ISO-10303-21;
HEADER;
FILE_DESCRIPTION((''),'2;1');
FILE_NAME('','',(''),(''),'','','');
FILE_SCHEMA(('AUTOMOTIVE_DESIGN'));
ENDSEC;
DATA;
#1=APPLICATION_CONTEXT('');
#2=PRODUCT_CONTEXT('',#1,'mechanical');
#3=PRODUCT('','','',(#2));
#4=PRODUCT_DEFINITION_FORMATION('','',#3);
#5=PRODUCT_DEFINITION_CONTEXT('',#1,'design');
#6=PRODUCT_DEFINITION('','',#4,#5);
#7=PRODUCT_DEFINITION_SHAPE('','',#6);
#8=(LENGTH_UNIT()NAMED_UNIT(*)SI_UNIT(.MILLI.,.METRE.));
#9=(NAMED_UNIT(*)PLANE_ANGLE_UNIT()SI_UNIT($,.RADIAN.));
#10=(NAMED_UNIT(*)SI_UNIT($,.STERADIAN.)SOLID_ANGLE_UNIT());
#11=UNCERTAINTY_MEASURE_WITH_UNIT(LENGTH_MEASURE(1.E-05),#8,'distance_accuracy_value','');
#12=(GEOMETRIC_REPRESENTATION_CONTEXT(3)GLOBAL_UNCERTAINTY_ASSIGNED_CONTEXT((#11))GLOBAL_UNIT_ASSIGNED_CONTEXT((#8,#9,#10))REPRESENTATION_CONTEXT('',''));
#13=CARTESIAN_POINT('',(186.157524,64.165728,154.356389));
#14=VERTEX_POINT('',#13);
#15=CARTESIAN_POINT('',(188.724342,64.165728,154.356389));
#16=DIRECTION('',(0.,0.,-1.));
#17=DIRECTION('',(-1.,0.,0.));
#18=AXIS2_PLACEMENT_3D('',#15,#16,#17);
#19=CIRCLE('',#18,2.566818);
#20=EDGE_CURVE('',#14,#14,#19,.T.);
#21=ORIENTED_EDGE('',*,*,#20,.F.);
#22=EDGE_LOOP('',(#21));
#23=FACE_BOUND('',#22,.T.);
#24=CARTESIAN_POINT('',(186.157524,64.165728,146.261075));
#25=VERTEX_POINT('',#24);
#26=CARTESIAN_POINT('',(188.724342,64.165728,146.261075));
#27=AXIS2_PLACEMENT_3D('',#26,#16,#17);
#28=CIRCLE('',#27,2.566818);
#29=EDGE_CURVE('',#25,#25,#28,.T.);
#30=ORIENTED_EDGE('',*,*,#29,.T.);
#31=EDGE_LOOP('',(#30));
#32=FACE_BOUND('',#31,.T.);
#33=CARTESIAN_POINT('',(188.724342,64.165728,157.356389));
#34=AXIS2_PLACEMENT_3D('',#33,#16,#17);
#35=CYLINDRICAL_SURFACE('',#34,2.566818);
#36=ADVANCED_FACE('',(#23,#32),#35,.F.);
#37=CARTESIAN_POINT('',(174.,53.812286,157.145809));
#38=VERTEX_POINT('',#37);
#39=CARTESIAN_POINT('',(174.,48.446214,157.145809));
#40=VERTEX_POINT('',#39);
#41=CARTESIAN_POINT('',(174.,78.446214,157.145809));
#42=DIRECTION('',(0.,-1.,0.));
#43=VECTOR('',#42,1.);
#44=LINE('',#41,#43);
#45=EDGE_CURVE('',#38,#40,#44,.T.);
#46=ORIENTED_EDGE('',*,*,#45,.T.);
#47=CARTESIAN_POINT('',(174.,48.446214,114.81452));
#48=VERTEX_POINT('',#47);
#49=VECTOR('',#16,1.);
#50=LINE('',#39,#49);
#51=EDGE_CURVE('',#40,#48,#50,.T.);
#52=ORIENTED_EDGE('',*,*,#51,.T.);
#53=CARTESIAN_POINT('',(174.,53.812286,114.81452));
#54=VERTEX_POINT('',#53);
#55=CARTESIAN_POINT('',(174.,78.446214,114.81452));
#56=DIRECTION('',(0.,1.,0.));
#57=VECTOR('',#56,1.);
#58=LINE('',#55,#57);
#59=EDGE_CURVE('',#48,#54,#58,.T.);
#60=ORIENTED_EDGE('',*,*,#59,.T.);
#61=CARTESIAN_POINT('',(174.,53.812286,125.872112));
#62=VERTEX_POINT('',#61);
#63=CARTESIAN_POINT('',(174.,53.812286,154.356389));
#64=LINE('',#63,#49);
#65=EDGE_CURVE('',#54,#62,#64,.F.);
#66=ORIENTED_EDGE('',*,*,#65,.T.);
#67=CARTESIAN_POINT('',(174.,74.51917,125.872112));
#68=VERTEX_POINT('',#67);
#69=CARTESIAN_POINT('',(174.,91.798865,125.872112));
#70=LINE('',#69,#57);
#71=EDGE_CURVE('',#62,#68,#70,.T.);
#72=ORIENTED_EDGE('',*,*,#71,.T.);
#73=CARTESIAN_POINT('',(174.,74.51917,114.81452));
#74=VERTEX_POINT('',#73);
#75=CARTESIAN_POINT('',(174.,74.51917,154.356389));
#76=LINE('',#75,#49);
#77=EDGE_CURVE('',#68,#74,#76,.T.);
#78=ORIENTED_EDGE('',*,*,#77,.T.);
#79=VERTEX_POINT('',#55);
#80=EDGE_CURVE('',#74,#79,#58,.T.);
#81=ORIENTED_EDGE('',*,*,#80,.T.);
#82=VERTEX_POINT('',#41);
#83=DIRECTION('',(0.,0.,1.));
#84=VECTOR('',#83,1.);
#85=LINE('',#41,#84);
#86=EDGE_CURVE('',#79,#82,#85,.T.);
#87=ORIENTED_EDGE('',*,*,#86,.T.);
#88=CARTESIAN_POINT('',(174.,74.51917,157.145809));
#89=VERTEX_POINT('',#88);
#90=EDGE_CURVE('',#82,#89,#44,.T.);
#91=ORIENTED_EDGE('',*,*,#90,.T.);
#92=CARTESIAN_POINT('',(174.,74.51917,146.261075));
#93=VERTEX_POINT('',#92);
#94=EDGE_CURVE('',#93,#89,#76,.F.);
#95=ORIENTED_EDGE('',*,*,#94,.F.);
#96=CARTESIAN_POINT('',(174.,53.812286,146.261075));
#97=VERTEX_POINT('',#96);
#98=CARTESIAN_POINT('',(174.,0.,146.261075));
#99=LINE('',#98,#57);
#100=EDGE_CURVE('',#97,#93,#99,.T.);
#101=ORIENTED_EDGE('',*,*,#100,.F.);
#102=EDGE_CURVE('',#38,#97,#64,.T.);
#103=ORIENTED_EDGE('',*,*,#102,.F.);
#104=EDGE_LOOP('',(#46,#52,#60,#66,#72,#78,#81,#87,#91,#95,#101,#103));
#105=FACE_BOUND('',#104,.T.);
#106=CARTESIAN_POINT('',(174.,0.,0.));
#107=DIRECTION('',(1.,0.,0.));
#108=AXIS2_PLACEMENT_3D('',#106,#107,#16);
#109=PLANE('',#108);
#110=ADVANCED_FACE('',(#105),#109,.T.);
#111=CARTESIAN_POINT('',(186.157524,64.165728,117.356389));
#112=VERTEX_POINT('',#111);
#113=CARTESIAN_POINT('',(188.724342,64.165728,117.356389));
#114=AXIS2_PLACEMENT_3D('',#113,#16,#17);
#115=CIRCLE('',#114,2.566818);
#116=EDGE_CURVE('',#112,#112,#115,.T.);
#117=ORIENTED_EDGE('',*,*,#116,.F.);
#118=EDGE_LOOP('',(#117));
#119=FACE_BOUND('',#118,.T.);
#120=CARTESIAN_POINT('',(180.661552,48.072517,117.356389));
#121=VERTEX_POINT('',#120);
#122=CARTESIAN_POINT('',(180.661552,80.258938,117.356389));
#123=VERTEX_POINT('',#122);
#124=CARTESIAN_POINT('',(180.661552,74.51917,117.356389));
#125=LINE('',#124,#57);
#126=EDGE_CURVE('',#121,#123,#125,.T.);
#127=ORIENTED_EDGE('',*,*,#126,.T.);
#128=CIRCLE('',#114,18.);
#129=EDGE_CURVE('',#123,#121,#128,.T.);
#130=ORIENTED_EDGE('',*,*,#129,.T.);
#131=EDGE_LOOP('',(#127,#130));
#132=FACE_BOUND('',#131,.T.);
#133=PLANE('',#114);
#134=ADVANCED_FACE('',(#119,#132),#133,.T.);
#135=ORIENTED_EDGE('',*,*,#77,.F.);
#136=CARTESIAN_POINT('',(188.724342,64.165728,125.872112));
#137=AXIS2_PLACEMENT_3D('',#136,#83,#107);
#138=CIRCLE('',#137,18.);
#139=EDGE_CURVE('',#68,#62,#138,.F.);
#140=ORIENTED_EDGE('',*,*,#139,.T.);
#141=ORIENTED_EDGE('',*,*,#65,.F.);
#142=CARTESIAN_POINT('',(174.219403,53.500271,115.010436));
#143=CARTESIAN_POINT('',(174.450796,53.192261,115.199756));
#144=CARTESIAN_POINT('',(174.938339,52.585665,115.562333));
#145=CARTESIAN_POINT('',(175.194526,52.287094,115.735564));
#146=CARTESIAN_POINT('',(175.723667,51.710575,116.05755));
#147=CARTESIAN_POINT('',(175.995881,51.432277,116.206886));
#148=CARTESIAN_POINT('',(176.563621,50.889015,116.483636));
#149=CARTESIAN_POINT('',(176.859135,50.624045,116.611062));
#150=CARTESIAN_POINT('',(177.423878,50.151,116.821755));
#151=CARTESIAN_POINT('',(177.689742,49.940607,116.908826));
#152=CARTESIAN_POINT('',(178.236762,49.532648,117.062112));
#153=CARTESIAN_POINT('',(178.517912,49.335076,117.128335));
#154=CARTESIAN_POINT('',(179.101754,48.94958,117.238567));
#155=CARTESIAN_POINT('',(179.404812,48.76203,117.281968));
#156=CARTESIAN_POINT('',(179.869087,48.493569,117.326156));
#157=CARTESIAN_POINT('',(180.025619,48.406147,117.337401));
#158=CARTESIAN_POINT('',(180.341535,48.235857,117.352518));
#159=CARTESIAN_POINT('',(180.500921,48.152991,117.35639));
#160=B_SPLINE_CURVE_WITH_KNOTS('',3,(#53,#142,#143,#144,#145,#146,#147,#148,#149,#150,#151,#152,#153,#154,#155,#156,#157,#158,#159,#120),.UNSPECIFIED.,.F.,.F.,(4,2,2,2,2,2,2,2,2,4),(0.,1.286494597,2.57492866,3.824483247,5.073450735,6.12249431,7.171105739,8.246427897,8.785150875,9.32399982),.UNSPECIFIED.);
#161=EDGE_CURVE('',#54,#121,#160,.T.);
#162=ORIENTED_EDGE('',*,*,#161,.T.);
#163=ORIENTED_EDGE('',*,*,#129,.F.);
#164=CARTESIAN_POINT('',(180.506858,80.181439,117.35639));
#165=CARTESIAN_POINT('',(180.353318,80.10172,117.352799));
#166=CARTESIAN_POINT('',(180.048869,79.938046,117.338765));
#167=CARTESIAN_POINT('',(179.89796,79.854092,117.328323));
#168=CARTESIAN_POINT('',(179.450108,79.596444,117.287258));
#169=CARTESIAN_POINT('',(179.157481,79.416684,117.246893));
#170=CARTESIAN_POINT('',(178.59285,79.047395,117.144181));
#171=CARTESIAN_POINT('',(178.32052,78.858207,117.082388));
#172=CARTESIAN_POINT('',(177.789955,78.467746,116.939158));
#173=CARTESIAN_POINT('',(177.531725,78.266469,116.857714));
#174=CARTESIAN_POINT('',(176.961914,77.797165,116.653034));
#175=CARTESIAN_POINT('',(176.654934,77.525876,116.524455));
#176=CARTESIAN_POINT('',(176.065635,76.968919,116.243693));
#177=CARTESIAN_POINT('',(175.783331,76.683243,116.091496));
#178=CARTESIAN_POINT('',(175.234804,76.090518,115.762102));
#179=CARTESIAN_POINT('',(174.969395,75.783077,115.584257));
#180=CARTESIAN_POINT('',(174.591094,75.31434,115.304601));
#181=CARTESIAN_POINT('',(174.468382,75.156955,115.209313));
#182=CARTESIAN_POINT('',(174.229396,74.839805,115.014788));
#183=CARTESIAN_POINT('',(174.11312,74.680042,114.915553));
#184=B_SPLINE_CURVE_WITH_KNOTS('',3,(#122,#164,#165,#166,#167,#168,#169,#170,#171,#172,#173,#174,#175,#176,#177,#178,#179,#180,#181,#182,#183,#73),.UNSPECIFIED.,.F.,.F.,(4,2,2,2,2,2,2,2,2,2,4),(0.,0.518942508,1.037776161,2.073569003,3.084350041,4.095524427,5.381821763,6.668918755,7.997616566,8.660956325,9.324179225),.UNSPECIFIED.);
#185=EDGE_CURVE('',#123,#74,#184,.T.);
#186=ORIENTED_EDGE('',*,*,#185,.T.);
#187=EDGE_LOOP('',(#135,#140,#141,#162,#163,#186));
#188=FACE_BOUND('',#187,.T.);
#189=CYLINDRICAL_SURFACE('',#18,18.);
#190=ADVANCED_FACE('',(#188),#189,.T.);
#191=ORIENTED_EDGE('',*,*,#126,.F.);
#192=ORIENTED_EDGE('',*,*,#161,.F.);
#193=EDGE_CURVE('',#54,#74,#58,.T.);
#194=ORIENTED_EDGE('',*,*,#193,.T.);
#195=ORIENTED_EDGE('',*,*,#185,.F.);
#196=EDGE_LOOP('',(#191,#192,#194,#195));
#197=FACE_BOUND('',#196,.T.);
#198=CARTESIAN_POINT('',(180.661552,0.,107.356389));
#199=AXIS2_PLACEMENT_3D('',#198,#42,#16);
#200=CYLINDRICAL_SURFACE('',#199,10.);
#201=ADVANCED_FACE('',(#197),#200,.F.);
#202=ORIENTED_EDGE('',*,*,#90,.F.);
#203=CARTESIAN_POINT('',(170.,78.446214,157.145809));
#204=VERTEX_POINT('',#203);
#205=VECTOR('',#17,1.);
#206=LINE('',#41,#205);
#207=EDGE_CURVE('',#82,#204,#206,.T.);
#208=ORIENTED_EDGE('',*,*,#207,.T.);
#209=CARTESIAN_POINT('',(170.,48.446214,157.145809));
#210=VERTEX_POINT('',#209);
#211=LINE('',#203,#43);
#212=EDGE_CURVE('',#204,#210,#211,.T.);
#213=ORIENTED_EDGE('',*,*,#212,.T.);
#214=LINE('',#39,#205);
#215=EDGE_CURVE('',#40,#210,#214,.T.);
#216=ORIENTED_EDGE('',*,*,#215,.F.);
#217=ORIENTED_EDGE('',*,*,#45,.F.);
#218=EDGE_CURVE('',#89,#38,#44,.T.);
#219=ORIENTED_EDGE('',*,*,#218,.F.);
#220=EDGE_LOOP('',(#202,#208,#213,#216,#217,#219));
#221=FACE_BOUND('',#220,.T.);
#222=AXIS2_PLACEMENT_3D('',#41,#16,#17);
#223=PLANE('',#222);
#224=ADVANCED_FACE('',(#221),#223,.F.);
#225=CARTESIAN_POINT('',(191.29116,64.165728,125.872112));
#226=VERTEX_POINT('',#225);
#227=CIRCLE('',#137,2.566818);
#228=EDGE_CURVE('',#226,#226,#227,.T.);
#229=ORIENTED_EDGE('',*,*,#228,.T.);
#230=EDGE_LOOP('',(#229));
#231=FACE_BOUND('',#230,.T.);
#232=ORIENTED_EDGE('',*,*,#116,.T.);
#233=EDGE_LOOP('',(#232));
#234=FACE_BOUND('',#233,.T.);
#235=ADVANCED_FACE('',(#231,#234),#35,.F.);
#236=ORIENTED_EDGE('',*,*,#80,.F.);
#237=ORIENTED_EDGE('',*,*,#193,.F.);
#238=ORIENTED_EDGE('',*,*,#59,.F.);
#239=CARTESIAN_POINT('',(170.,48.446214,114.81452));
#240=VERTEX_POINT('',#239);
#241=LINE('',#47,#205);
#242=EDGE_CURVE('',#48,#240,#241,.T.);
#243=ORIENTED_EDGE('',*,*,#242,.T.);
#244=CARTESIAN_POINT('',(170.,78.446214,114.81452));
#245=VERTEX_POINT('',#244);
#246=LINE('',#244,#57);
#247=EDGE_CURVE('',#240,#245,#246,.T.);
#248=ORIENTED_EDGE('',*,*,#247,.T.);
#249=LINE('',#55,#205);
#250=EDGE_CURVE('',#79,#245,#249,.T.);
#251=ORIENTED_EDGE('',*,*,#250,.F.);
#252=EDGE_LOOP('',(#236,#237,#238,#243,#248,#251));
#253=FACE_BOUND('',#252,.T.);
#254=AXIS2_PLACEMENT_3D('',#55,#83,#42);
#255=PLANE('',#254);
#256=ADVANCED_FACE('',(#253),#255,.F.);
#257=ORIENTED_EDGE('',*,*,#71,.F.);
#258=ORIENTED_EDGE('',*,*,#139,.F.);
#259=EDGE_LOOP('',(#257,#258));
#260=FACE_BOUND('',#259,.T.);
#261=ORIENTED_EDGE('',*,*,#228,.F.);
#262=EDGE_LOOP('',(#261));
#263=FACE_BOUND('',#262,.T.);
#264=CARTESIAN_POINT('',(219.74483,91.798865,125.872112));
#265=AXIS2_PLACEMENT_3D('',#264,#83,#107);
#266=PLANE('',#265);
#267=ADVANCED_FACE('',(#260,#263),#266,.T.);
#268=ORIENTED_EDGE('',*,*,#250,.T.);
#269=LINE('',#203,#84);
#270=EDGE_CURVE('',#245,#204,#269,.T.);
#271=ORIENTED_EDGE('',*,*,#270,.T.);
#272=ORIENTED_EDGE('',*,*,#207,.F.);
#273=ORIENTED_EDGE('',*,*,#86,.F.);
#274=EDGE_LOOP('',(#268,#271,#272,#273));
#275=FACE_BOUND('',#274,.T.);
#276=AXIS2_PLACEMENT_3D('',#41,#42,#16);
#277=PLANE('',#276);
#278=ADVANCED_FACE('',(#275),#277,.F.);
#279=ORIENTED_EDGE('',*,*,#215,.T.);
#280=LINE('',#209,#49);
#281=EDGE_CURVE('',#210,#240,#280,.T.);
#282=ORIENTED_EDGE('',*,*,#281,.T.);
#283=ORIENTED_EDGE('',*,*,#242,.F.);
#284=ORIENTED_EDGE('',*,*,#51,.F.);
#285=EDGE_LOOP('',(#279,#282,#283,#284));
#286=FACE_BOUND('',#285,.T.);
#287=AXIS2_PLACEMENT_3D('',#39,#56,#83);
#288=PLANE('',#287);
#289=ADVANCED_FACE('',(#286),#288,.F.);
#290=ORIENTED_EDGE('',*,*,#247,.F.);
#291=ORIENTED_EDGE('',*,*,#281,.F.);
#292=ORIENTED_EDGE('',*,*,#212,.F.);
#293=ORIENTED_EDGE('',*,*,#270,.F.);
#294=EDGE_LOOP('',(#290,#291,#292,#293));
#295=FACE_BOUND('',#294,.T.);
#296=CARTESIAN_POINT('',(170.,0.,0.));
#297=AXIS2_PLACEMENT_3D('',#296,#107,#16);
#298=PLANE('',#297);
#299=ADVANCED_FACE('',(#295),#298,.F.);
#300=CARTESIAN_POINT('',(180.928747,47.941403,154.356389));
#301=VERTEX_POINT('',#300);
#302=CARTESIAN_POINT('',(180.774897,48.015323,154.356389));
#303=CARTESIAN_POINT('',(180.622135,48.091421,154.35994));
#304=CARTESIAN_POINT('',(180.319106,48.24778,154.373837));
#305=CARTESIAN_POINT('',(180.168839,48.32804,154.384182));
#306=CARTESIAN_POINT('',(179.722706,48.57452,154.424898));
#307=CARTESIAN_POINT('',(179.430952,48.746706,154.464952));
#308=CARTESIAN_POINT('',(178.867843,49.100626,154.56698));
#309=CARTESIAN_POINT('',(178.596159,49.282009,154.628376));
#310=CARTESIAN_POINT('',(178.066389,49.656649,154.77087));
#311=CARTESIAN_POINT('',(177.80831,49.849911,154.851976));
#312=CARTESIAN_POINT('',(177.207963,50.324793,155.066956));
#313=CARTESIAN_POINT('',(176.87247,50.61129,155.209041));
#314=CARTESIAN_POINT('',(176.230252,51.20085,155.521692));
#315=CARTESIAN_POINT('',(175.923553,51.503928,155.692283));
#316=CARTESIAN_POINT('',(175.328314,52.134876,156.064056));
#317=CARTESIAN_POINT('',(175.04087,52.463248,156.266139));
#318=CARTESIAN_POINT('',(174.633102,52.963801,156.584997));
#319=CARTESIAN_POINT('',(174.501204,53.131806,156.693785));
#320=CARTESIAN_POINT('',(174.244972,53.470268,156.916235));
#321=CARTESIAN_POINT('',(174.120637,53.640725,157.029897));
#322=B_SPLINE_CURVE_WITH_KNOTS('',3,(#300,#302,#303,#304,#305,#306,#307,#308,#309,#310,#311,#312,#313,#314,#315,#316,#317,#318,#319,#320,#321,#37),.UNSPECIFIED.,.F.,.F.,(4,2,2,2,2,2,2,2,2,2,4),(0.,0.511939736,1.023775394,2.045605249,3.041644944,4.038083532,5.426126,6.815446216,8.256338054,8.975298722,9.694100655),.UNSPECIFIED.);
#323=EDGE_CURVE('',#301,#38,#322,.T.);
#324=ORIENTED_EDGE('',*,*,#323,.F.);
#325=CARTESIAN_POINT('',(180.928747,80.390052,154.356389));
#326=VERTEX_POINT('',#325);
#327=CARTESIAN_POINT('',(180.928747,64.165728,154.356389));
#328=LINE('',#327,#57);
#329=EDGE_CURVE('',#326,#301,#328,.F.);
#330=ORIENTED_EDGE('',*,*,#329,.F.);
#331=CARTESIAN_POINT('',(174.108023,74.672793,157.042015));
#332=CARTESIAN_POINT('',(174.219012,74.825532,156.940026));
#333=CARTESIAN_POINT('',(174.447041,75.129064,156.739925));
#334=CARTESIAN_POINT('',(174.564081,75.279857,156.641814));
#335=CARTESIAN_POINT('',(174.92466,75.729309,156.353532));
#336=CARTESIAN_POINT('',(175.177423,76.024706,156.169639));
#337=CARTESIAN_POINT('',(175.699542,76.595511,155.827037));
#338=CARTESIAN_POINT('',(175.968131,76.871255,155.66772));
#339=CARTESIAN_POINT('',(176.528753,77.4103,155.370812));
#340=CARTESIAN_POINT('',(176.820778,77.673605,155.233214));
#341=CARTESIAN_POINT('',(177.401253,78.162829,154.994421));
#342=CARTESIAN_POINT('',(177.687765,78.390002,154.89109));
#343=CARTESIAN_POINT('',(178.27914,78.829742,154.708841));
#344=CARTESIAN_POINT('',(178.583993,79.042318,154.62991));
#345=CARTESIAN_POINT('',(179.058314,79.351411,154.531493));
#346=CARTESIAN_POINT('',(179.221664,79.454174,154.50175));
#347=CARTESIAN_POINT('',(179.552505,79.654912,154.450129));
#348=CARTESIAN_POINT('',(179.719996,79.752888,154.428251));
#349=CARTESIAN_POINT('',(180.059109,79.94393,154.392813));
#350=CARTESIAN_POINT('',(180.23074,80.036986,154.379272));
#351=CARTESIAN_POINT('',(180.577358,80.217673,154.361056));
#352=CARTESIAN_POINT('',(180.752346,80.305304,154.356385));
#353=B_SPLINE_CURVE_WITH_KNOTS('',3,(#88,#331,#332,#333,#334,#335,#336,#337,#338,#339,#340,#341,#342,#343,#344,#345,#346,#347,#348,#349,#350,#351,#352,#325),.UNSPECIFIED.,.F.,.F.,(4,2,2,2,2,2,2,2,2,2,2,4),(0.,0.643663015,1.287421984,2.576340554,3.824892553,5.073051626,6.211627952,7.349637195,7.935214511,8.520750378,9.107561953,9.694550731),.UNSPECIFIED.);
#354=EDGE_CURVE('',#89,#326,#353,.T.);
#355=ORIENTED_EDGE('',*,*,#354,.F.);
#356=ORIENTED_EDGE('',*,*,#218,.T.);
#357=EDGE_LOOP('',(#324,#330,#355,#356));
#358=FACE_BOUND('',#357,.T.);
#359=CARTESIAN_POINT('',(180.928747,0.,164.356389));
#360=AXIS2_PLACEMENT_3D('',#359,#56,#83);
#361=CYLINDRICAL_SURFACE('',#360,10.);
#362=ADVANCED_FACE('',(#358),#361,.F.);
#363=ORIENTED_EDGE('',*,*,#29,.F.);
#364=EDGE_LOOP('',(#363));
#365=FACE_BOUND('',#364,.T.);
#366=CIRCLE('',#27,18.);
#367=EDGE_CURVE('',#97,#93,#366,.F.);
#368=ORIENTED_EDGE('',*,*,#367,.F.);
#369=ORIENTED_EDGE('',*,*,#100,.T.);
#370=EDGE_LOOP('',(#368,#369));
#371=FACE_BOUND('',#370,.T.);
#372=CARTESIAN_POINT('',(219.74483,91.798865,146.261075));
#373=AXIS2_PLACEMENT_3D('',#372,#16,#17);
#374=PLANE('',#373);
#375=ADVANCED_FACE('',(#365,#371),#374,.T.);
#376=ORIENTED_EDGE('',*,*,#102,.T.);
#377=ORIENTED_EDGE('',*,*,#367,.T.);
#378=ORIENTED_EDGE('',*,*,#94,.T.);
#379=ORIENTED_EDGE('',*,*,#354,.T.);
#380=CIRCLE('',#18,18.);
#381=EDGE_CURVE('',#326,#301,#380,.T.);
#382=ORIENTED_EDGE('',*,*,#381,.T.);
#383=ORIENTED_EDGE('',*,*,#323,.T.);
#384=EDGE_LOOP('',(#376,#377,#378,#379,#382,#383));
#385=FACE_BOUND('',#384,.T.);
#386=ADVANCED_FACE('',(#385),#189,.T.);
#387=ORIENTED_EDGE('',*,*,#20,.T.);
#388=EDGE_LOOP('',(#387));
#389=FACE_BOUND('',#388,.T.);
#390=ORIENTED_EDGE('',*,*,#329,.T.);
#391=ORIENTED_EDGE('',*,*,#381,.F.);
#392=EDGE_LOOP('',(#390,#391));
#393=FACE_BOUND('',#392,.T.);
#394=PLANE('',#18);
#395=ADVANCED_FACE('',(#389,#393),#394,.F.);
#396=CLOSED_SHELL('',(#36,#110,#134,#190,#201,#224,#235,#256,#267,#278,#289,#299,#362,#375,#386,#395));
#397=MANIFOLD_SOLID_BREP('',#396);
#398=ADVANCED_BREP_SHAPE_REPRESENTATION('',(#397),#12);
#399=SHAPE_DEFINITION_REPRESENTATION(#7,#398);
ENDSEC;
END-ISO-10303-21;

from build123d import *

# Parameters (mm, degrees)
BOSS_EXTRUDE1_DEPTH      = 9
BOSS_EXTRUDE1_DEPTH_BACK = 28
SKETCH1_R                = 18
SKETCH2_W                = 50.00806526
SKETCH2_H                = 20.388963247
CUT_EXTRUDE1_DEPTH       = 137
SKETCH6_R                = 2.56681782
CUT_EXTRUDE2_DEPTH       = 40
BOSS_EXTRUDE2_START      = 170
SKETCH7_W                = 42.331288986
SKETCH7_H                = 30
BOSS_EXTRUDE2_DEPTH      = 4
FILLET1_R                = 10


with BuildPart() as part:
    # Sketch1 → Boss-Extrude1 (new, two sides: drawn at the far end of the back side and taken through both)
    with BuildSketch(Plane(origin=(0, 0, 126.356389087), x_dir=(-1, 0, 0), z_dir=(0, 0, -1)).offset(-BOSS_EXTRUDE1_DEPTH_BACK)):
        with Locations((-188.724341924, 64.165727937)):
            Circle(SKETCH1_R)
    extrude(amount=BOSS_EXTRUDE1_DEPTH + BOSS_EXTRUDE1_DEPTH_BACK)

    # Sketch2 → Cut-Extrude1 (cut)
    with BuildSketch(Plane(origin=(-6.948170377, -29.446447031, 0), x_dir=(0.99748757373397, -0.07084165615171512, 3.115559675779194e-15), z_dir=(0.07084165615171512, 0.99748757373397, 0))):
        with Locations((192.53019978, -136.066593827)):
            Rectangle(SKETCH2_W, SKETCH2_H)
    extrude(amount=CUT_EXTRUDE1_DEPTH, mode=Mode.SUBTRACT)


with BuildPart() as cut_extrude1_piece_1:
    # of the separate pieces the step leaves, piece 1, a body of its own (cut_extrude1_pieces)
    add(part.part.solids().sort_by_distance((170.724341924, 64.165727937, 125.872112203))[0])


with BuildPart() as cut_extrude1_piece_2:
    # of the separate pieces the step leaves, piece 2, a body of its own (cut_extrude1_pieces)
    add(part.part.solids().sort_by_distance((170.724341924, 64.165727937, 146.26107545))[0])


with BuildPart() as cut_extrude2_tool:
    # Sketch6 → Cut-Extrude2 (new body)
    with BuildSketch(Plane(origin=(0, 0, 117.356389087), x_dir=(-1, 0, 0), z_dir=(0, 0, -1))):
        with Locations((-188.724341924, 64.165727937)):
            Circle(SKETCH6_R)
    extrude(amount=-CUT_EXTRUDE2_DEPTH)


with BuildPart() as cut_extrude1_piece_1_1:
    add(cut_extrude1_piece_1.part)

    # Cut-Extrude2: cut by cut_extrude2_tool
    add(cut_extrude2_tool.part, mode=Mode.SUBTRACT)



with BuildPart() as cut_extrude1_piece_2_1:
    add(cut_extrude1_piece_2.part)

    # Cut-Extrude2: cut by cut_extrude2_tool
    add(cut_extrude2_tool.part, mode=Mode.SUBTRACT)


with BuildPart() as cut_extrude1_piece_1_2:
    add(cut_extrude1_piece_1_1.part)

    add(cut_extrude1_piece_2_1.part)  # Boss-Extrude2 merges Cut-Extrude1 piece 2
    # Sketch7 → Boss-Extrude2 (add)
    with BuildSketch(Plane(origin=(0, 0, 0), x_dir=(0, 0, -1), z_dir=(1, 0, 0)).offset(BOSS_EXTRUDE2_START)):
        with Locations((-135.980164786, 63.44621419)):
            Rectangle(SKETCH7_W, SKETCH7_H)
    extrude(amount=BOSS_EXTRUDE2_DEPTH)

    # Fillet1
    # the kernel refuses this fillet: 10 mm, written as the material it adds along each edge
    with BuildSketch(Plane(origin=(174, 37.158405517, 117.356389087), x_dir=(0, 0, -1), z_dir=(0, 1, 0))) as fillet1_piece_1_section:
        with BuildLine():
            CenterArc((10, -6.66155229), FILLET1_R, 138.228987443, 41.771012557)
            Line((0, -6.66155229), (-0.2, -6.66155229))
            Line((-0.2, -6.66155229), (-0.2, 0))
            Line((-0.2, 0), (0, 0.2))
            ThreePointArc((0, 0.2), (1.270934397, 0.2), (2.39270617, 0.133231046))
            Line((2.39270617, 0.133231046), (2.541868794, 0))
        make_face()
    fillet1_piece_1 = extrude(amount=54.01464484, mode=Mode.PRIVATE)
    fillet1_piece_1 = fillet1_piece_1 & Plane(origin=(188.724341924, 64.165727937, 117.454219773), x_dir=(-1, 0, 0), z_dir=(0, 0, 1)) * Cylinder(18, 135, mode=Mode.PRIVATE)
    add(fillet1_piece_1)
    with BuildSketch(Plane(origin=(174, 36.49041805, 154.356389087), x_dir=(0, 0, 1), z_dir=(0, 1, 0))) as fillet1_piece_2_section:
        with BuildLine():
            CenterArc((10, 6.928747277), FILLET1_R, 180, 43.858101489)
            Line((0, 6.928747277), (-0.2, 6.928747277))
            Line((-0.2, 6.928747277), (-0.2, 0))
            Line((-0.2, 0), (0, -0.2))
            ThreePointArc((0, -0.2), (1.394710096, -0.2), (2.645208596, -0.138574946))
            Line((2.645208596, -0.138574946), (2.789420192, 0))
        make_face()
    fillet1_piece_2 = extrude(amount=55.350619773, mode=Mode.PRIVATE)
    fillet1_piece_2 = fillet1_piece_2 & Plane(origin=(188.724341924, 64.165727937, 154.260633817), x_dir=(-1, 0, 0), z_dir=(0, 0, -1)) * Cylinder(18, 139, mode=Mode.PRIVATE)
    add(fillet1_piece_2)


solid = cut_extrude1_piece_1_2.part
